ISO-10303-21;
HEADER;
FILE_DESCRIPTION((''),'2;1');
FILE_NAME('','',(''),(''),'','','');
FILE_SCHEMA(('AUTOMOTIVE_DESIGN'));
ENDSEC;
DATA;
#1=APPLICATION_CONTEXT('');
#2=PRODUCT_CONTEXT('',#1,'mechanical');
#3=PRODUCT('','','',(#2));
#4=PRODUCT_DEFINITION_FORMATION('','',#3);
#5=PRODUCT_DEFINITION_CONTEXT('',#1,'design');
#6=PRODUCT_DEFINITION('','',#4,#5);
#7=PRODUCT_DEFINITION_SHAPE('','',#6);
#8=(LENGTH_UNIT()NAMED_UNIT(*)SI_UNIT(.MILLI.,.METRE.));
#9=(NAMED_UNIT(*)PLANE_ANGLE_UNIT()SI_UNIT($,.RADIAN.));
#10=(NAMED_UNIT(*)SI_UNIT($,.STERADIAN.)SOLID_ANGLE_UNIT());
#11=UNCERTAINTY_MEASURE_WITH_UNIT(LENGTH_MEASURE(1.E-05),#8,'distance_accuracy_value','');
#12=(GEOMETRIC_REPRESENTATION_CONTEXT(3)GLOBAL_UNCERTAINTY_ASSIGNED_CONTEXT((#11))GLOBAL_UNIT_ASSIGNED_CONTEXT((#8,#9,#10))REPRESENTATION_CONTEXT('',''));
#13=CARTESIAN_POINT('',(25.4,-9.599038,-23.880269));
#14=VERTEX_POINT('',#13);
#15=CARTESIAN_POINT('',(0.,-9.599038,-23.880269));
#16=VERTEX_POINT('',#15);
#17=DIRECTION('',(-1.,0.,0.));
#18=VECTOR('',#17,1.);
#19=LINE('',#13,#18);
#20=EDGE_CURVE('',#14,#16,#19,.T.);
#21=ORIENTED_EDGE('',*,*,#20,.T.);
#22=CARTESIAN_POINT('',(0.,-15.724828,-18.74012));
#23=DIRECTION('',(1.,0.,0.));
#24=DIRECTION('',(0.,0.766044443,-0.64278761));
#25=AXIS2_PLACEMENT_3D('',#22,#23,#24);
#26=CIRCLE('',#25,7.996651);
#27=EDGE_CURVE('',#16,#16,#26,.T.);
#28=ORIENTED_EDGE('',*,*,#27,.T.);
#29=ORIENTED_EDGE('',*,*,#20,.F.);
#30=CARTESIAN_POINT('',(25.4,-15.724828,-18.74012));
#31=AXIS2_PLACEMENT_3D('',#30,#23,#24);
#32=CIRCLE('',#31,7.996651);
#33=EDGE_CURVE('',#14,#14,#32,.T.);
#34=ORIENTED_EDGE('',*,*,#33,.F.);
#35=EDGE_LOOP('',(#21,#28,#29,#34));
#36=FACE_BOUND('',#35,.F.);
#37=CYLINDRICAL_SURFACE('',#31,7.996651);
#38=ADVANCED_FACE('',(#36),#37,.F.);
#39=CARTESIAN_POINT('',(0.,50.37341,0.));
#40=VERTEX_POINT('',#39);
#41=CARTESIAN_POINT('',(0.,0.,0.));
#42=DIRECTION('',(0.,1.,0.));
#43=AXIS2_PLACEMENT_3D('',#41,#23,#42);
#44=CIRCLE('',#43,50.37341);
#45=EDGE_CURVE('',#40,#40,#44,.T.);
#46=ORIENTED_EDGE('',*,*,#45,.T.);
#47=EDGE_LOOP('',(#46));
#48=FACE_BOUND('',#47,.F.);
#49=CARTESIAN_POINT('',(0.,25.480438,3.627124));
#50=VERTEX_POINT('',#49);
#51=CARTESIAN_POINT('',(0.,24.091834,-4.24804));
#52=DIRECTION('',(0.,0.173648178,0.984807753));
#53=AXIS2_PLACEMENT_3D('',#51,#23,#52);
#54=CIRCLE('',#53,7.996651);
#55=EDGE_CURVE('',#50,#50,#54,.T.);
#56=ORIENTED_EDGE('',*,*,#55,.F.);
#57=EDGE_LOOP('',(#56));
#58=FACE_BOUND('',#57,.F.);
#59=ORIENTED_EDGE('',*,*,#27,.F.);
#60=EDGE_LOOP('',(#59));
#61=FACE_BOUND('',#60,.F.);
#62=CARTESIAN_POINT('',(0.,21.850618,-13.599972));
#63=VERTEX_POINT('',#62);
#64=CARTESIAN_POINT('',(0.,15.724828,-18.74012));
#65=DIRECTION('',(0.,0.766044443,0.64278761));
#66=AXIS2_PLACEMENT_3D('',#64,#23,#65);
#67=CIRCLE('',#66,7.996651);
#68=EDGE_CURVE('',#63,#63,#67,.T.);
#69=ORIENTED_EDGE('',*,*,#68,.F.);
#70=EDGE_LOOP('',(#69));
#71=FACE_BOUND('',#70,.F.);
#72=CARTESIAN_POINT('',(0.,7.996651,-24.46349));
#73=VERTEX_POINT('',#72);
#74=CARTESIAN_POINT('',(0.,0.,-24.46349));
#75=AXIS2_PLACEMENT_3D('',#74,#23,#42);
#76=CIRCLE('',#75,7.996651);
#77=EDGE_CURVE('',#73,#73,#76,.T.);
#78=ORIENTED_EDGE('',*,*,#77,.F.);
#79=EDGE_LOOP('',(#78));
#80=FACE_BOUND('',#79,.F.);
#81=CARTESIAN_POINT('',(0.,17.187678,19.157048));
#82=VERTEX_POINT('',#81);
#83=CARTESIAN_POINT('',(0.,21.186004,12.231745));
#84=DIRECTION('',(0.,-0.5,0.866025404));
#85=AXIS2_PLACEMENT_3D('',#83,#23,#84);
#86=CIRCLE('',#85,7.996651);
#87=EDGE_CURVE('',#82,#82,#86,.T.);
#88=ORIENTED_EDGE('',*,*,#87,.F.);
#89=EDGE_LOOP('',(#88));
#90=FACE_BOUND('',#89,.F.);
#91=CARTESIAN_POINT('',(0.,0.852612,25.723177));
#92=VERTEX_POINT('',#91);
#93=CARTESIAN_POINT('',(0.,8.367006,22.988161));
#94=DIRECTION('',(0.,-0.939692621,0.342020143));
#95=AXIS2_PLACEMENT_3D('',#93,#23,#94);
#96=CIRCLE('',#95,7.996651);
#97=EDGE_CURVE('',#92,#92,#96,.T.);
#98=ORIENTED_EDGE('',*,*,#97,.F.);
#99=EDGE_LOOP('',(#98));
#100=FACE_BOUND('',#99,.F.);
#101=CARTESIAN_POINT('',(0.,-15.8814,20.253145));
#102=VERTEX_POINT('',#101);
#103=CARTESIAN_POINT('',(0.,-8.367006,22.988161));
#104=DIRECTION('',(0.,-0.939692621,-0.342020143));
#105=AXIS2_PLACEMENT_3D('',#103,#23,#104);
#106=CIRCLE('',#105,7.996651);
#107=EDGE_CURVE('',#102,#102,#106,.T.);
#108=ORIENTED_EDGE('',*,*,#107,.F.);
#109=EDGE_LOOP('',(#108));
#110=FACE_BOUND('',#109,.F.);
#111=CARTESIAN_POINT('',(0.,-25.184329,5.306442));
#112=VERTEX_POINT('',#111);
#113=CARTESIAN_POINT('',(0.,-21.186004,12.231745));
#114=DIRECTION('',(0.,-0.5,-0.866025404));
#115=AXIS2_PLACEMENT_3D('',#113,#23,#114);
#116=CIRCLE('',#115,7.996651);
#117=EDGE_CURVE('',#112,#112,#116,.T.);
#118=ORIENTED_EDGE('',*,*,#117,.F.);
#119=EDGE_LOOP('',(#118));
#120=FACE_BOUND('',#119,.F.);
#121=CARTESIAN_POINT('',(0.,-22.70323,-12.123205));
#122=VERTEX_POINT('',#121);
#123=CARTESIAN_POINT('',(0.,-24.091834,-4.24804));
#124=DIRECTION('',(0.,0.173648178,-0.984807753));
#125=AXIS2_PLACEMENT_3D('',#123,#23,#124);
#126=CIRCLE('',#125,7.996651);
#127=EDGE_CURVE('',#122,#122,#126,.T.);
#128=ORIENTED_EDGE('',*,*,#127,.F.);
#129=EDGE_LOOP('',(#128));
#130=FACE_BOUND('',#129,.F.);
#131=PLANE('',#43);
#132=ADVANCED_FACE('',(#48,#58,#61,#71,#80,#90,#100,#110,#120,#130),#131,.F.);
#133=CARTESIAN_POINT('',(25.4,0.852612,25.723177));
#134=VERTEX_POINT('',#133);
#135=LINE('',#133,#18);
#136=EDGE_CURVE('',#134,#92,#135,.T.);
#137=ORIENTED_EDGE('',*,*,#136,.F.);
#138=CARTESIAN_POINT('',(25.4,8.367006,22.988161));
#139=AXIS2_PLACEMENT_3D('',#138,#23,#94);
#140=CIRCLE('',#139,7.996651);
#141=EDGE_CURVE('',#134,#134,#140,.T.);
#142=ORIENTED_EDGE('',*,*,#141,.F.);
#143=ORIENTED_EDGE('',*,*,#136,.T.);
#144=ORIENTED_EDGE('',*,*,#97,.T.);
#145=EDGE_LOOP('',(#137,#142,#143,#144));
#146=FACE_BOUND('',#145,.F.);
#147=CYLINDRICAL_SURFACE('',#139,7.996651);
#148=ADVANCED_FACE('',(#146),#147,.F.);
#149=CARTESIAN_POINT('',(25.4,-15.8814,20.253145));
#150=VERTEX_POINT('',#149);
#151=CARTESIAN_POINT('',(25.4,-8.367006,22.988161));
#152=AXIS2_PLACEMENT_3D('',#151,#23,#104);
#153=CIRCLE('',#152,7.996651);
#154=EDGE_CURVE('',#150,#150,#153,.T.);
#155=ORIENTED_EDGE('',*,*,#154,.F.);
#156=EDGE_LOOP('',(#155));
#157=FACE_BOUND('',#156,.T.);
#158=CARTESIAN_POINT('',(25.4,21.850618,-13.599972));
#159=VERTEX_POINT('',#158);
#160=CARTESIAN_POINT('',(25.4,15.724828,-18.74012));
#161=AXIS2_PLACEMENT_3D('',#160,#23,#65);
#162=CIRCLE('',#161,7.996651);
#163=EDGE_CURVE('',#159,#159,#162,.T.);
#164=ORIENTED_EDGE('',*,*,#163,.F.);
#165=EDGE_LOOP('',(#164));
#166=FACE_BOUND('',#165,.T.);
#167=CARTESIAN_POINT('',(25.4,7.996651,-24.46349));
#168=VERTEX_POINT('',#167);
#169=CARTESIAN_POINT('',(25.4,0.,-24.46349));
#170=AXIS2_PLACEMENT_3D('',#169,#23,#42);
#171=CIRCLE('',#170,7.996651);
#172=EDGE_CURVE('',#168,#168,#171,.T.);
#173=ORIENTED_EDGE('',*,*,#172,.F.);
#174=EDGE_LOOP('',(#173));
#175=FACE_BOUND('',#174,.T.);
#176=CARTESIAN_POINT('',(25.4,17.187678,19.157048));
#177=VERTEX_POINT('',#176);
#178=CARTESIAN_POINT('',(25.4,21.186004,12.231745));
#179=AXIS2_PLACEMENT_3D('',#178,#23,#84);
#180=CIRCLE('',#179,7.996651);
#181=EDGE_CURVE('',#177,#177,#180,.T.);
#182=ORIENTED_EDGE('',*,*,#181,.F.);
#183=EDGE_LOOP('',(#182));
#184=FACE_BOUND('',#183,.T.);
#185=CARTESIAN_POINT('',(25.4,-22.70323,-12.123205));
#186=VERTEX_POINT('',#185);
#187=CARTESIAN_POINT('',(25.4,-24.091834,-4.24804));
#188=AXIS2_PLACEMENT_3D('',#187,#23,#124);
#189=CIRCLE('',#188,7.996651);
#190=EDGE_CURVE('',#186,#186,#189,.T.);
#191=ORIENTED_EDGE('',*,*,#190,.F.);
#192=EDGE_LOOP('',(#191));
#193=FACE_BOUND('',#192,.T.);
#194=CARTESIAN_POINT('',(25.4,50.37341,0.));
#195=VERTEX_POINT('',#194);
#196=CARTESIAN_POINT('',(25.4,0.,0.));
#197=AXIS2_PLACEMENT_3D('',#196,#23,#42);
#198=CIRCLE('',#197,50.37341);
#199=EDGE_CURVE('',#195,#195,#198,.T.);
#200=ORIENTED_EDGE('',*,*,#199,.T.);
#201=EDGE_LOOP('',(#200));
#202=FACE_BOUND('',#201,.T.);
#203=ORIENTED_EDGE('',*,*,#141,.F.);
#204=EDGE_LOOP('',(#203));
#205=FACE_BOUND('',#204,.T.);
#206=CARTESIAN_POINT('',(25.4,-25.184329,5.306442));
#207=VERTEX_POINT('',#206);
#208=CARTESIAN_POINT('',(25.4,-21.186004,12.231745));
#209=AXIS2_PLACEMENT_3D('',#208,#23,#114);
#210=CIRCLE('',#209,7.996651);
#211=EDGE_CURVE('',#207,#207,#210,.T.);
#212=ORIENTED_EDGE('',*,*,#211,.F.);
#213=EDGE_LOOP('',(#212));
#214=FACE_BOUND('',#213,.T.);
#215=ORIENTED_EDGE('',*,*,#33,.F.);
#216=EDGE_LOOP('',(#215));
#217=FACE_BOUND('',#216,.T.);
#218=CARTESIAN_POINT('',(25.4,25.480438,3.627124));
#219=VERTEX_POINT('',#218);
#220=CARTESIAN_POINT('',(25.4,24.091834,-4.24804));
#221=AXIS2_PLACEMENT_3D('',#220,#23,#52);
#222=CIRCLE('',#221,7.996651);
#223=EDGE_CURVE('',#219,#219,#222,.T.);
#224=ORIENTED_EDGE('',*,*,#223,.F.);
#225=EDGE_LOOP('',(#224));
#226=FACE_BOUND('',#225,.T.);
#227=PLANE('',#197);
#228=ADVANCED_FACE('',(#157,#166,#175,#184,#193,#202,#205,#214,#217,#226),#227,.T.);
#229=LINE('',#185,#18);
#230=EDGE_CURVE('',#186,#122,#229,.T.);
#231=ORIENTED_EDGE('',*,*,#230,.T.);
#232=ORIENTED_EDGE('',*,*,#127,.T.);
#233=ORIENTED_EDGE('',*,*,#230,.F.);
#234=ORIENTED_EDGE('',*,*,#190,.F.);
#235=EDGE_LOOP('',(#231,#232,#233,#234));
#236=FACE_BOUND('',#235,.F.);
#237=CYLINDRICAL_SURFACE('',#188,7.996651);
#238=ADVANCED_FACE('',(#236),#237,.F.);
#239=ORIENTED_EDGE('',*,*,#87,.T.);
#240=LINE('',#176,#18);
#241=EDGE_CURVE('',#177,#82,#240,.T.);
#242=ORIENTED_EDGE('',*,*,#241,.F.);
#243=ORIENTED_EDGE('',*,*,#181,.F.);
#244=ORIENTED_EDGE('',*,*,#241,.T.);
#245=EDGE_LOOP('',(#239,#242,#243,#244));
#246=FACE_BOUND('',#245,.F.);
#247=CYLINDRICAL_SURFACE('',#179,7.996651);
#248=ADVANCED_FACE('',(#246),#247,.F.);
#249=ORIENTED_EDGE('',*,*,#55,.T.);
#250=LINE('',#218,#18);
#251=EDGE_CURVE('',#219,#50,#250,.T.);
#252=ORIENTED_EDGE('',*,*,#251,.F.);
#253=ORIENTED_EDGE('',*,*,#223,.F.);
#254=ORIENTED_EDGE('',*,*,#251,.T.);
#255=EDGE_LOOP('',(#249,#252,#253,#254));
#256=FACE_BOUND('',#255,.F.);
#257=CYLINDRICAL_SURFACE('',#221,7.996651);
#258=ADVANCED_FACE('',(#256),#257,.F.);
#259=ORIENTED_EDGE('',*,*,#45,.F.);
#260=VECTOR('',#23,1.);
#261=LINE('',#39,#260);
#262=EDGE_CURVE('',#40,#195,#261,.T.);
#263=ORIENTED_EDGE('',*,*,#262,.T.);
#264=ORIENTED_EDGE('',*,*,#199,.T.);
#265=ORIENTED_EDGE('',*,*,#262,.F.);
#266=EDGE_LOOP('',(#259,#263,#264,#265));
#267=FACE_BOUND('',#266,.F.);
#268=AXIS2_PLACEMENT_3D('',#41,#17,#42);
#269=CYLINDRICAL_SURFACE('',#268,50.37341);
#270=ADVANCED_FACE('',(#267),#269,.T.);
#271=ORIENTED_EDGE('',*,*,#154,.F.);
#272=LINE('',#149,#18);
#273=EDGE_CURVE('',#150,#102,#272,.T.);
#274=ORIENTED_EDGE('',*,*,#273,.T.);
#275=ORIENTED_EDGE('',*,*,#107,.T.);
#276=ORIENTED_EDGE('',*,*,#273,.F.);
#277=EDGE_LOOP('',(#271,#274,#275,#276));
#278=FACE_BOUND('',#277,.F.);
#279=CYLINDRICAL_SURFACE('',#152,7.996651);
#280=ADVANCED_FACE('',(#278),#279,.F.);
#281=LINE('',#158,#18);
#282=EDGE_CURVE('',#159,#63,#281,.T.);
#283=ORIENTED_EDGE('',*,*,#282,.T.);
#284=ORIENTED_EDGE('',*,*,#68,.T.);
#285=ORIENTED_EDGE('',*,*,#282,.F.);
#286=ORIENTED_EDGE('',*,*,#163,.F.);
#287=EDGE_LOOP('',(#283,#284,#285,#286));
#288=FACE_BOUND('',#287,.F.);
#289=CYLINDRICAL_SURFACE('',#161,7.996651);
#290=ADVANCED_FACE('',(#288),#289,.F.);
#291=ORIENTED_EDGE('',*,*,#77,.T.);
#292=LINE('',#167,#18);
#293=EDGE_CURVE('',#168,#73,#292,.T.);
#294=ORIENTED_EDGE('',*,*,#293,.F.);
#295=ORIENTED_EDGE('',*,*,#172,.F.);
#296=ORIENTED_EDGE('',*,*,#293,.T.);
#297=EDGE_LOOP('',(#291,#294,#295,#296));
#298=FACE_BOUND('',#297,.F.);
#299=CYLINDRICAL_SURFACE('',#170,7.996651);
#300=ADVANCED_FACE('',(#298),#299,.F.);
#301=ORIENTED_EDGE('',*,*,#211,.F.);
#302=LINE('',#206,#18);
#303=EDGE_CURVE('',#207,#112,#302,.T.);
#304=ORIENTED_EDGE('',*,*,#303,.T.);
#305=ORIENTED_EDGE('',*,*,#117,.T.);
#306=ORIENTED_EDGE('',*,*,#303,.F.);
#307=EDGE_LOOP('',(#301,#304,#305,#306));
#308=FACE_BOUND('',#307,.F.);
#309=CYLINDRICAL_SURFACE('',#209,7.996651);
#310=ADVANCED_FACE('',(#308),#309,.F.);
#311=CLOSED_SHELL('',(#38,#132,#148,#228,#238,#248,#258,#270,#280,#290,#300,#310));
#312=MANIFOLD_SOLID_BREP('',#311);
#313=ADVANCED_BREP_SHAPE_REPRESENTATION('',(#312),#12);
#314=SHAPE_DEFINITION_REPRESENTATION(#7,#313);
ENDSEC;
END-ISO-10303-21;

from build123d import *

# Parameters (mm, degrees)
F0_R            = 50.3734102362
F1_DEPTH        = 25.4
F2_R            = 7.9966512346
F3_DEPTH        = 25.4
F3_COPIES_COUNT = 9


# Not quite as in the source:
# - a pattern or mirror of a feature is missing from the dataset's text; its kind, count and spacing are read off the source's solid


with BuildPart() as f1:
    # F0 (on Right) → F1 (new body)
    with BuildSketch(Plane.YZ):
        Circle(F0_R)
    extrude(amount=F1_DEPTH)

    # F2 (on face) → F3 (cut)
    with BuildSketch(Plane.YZ.offset(25.4)):
        with Locations((0, -24.4634896517)):
            Circle(F2_R)
    f3 = extrude(amount=-F3_DEPTH, mode=Mode.SUBTRACT)

    # F3_copies: F3 ×9 about axis
    f3_copies_axis = Axis((0, 0, 0), (1, 0, 0))
    for i in range(1, F3_COPIES_COUNT):
        add(f3.rotate(f3_copies_axis, i * 360 / F3_COPIES_COUNT), mode=Mode.SUBTRACT)


solid = f1.part
